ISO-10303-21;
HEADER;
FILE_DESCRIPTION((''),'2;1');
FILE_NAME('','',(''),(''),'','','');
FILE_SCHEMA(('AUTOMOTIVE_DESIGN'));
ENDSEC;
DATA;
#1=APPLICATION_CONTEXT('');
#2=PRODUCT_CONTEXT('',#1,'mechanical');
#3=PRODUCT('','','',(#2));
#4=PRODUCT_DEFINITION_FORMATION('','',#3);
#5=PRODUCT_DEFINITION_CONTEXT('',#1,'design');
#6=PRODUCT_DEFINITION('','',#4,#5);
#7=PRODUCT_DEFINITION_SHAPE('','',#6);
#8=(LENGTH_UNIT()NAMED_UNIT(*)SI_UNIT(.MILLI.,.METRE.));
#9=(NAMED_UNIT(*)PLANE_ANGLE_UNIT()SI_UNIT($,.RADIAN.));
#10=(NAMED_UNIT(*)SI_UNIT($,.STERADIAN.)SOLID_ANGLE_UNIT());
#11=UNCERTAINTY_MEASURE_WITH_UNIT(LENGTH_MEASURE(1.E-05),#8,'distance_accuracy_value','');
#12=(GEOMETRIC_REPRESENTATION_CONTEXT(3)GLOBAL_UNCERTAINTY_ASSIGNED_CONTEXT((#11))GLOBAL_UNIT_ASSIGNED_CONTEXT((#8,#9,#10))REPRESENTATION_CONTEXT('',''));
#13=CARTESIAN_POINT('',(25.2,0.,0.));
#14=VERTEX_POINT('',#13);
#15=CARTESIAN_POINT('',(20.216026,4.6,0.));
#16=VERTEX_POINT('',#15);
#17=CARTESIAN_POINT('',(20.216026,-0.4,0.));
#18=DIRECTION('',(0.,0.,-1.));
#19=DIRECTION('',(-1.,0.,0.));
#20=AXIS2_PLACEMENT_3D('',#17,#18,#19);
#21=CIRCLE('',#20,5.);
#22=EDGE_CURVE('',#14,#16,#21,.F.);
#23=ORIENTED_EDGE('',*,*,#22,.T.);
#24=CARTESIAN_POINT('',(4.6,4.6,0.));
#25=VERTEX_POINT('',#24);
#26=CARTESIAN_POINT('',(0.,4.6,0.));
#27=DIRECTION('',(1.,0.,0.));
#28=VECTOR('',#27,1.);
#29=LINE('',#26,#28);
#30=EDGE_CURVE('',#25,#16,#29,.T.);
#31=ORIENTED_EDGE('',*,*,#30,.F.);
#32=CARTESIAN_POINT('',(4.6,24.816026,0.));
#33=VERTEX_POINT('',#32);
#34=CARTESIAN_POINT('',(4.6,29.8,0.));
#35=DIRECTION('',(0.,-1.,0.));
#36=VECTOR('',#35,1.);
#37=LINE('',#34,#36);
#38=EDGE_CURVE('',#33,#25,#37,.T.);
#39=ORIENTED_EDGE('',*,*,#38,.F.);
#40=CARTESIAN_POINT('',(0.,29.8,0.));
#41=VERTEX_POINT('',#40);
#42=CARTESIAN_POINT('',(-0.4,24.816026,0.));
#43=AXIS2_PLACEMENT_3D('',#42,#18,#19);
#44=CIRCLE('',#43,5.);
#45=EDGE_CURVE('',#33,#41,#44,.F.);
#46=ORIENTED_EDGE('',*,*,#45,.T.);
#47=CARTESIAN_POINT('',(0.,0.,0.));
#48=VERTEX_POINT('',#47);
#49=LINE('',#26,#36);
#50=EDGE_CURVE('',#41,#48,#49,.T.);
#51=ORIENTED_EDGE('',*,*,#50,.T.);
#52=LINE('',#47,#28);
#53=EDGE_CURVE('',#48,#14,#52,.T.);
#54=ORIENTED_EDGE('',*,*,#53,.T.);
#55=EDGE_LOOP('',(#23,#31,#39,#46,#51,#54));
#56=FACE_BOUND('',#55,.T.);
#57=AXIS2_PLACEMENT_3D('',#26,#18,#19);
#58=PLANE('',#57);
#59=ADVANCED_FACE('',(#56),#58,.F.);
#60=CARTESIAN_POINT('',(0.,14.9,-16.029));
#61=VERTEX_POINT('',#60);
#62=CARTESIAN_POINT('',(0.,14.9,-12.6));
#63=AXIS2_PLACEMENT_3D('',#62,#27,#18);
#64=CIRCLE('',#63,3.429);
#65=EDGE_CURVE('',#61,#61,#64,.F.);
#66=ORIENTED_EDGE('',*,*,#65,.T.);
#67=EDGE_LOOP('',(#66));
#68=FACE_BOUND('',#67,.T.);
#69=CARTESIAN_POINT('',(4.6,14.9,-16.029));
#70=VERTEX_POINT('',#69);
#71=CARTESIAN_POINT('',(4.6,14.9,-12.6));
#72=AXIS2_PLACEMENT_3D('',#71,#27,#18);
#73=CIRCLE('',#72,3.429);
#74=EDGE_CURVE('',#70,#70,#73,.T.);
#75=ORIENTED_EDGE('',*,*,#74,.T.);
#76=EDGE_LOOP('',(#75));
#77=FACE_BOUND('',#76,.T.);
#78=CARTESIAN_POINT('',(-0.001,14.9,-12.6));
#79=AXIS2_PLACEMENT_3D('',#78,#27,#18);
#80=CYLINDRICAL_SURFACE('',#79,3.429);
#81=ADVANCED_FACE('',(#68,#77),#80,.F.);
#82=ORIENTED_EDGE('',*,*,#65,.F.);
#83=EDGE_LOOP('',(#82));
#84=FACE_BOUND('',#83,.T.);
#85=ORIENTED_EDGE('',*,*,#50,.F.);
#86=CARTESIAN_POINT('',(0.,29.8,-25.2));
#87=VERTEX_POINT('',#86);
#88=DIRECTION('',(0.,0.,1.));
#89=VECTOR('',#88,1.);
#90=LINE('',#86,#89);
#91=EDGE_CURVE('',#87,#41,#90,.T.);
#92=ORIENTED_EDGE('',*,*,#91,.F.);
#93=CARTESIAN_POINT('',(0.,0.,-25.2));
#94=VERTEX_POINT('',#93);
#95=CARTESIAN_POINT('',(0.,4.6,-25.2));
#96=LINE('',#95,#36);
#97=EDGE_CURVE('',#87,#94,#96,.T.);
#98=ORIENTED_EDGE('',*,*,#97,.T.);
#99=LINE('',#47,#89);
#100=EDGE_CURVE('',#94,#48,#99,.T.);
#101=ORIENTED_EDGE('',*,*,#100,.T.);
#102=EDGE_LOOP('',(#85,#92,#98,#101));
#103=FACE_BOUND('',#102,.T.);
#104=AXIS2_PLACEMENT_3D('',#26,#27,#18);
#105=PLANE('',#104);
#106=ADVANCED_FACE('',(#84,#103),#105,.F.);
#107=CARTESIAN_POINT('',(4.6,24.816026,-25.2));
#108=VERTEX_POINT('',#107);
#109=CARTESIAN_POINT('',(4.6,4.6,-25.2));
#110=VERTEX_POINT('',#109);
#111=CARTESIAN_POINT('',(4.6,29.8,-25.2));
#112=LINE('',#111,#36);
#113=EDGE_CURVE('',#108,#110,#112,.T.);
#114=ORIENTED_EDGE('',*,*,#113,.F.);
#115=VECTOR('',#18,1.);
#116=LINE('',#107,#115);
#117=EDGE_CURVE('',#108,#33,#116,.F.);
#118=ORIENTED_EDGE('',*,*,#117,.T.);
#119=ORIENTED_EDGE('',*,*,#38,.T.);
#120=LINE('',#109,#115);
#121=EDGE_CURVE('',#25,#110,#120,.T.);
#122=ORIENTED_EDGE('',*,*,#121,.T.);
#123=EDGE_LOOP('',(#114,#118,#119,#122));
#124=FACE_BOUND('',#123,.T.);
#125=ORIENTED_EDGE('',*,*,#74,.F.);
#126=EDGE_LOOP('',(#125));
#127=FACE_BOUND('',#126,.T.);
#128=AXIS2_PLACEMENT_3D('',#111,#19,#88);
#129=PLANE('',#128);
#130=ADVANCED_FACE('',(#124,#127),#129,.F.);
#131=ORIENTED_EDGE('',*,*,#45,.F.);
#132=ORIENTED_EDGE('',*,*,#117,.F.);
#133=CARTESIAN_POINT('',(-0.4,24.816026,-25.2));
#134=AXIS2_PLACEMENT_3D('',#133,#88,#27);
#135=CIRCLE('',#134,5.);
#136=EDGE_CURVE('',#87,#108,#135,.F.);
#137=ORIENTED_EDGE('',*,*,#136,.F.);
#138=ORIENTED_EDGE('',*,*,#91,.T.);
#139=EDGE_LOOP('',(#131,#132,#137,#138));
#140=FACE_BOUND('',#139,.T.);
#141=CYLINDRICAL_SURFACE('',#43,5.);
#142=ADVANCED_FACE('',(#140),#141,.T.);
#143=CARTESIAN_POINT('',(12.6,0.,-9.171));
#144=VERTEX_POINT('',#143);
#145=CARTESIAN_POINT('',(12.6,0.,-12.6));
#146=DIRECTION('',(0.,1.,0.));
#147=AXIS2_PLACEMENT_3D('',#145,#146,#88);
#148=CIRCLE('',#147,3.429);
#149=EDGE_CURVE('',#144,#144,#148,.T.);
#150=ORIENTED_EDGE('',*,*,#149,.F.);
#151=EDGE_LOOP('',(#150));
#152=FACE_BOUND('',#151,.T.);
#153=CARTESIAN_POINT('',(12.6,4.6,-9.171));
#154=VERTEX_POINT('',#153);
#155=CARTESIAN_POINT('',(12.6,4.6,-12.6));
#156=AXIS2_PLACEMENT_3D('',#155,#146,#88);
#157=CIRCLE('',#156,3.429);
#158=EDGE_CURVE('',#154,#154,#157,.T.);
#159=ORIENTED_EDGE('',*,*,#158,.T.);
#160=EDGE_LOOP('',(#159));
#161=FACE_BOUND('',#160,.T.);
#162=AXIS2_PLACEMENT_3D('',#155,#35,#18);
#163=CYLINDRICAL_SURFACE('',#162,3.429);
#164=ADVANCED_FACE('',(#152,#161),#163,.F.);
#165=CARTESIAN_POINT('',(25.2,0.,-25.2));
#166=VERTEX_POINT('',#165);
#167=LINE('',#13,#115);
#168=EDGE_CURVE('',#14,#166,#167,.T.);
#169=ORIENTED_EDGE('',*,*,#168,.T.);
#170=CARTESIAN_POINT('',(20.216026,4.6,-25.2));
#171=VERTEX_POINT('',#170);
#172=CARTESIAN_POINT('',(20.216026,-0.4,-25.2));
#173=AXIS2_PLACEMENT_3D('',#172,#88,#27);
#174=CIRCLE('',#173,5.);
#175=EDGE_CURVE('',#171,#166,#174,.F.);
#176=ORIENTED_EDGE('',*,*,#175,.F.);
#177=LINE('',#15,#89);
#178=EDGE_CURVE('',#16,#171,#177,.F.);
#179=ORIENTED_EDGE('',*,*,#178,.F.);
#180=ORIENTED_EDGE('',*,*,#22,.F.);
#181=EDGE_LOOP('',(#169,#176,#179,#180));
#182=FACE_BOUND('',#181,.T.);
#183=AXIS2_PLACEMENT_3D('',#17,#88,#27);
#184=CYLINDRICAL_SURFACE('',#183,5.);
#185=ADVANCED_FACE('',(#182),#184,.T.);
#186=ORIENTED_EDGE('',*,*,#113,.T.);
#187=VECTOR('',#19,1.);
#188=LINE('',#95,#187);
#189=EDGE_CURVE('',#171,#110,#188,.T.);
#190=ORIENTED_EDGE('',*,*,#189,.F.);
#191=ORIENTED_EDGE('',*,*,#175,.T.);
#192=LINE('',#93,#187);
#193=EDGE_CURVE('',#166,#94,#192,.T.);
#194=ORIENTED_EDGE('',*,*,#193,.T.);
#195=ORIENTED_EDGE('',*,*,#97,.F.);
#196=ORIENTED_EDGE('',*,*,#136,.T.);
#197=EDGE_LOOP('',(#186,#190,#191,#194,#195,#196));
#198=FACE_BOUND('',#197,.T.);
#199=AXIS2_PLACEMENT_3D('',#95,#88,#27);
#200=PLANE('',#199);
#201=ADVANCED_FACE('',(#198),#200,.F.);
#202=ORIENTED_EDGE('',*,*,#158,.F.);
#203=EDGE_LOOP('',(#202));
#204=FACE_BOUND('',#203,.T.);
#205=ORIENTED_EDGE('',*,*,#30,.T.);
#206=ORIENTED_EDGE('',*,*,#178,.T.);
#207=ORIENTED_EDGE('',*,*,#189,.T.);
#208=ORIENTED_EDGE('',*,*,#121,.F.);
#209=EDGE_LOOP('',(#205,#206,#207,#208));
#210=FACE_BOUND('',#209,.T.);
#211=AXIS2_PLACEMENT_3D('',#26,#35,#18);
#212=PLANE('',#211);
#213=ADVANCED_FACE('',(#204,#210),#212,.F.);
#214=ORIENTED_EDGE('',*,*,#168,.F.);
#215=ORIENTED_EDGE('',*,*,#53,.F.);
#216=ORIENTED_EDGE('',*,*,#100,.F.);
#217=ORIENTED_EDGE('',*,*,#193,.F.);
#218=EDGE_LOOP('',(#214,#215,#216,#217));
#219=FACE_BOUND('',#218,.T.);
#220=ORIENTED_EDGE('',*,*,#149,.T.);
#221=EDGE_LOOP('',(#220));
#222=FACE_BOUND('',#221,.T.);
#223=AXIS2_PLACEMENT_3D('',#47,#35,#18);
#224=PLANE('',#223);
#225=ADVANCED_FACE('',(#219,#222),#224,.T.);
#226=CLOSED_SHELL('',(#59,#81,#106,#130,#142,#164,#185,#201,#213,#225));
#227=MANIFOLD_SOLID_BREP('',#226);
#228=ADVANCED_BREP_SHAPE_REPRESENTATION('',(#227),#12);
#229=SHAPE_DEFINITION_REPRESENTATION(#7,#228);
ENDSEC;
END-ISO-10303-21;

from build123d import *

# Parameters (mm, degrees)
SKETCH1_W           = 25.2
SKETCH1_H           = 25.2
SKETCH1_R           = 3.429
BOSS_EXTRUDE1_DEPTH = 4.6
SKETCH2_W           = 4.6
SKETCH2_H           = 25.2
BOSS_EXTRUDE2_DEPTH = 25.2
CUT_EXTRUDE1_REACH  = 46.13
SKETCH3_R           = 3.429
FILLET1_R           = 5


with BuildPart() as part:
    # Sketch1 → Boss-Extrude1 (new body)
    with BuildSketch(Plane(origin=(0, 0, 0), x_dir=(1, 0, 0), z_dir=(0, 1, 0))):
        with Locations((12.6, 12.6)):
            Rectangle(SKETCH1_W, SKETCH1_H)
        with Locations(Location((12.6, 12.6, 0), (0, 0, 270))):
            Circle(SKETCH1_R, mode=Mode.SUBTRACT)
    extrude(amount=BOSS_EXTRUDE1_DEPTH)

    # Sketch2 → Boss-Extrude2 (add)
    with BuildSketch(Plane(origin=(0, 4.6, 0), x_dir=(1, 0, 0), z_dir=(0, 1, 0))):
        with Locations((2.3, 12.6)):
            Rectangle(SKETCH2_W, SKETCH2_H)
    extrude(amount=BOSS_EXTRUDE2_DEPTH)

    # Sketch3 → Cut-Extrude1 (cut, up to next)
    with BuildSketch(Plane(origin=(4.6, 0, 0), x_dir=(0, 0, -1), z_dir=(1, 0, 0)), mode=Mode.PRIVATE) as cut_extrude1_sk1:
        with Locations((12.6, 14.9)):
            Circle(SKETCH3_R)
    cut_extrude1_tool1 = extrude(cut_extrude1_sk1.sketch, amount=-CUT_EXTRUDE1_REACH, mode=Mode.PRIVATE) & part.part
    add(cut_extrude1_tool1.solids().sort_by_distance((4.6, 14.9, -12.6))[0], mode=Mode.SUBTRACT)

    # Fillet1
    # the kernel refuses this fillet: 5 mm, written as the material it takes off along each edge
    with BuildSketch(Plane(origin=(4.6, 29.8, -37.659935794), x_dir=(-1, 0, 0), z_dir=(0, 0, 1))) as fillet1_piece_1:
        with BuildLine():
            CenterArc((5, 4.983974318), FILLET1_R, 180, 85.411434264)
            Line((0, 4.983974318), (-0.1, 4.983974318))
            Line((-0.1, 4.983974318), (-0.1, 0))
            Line((-0.1, 0), (0, -0.1))
            ThreePointArc((0, -0.1), (2.3, -0.1), (4.592, -0.099679486))
            Line((4.592, -0.099679486), (4.6, 0))
        make_face()
    extrude(amount=50.119871589, mode=Mode.SUBTRACT)
    with BuildSketch(Plane(origin=(25.2, 4.6, 12.459935794), x_dir=(-1, 0, 0), z_dir=(0, 0, -1))) as fillet1_piece_2:
        with BuildLine():
            CenterArc((4.983974318, -5), FILLET1_R, 90, 85.411434264)
            Line((0, -4.6), (-0.099679486, -4.592))
            ThreePointArc((-0.099679486, -4.592), (-0.1, -2.3), (-0.1, 0))
            Line((-0.1, 0), (0, 0.1))
            Line((0, 0.1), (4.983974318, 0.1))
            Line((4.983974318, 0.1), (4.983974318, 0))
        make_face()
    extrude(amount=50.119871589, mode=Mode.SUBTRACT)


solid = part.part
